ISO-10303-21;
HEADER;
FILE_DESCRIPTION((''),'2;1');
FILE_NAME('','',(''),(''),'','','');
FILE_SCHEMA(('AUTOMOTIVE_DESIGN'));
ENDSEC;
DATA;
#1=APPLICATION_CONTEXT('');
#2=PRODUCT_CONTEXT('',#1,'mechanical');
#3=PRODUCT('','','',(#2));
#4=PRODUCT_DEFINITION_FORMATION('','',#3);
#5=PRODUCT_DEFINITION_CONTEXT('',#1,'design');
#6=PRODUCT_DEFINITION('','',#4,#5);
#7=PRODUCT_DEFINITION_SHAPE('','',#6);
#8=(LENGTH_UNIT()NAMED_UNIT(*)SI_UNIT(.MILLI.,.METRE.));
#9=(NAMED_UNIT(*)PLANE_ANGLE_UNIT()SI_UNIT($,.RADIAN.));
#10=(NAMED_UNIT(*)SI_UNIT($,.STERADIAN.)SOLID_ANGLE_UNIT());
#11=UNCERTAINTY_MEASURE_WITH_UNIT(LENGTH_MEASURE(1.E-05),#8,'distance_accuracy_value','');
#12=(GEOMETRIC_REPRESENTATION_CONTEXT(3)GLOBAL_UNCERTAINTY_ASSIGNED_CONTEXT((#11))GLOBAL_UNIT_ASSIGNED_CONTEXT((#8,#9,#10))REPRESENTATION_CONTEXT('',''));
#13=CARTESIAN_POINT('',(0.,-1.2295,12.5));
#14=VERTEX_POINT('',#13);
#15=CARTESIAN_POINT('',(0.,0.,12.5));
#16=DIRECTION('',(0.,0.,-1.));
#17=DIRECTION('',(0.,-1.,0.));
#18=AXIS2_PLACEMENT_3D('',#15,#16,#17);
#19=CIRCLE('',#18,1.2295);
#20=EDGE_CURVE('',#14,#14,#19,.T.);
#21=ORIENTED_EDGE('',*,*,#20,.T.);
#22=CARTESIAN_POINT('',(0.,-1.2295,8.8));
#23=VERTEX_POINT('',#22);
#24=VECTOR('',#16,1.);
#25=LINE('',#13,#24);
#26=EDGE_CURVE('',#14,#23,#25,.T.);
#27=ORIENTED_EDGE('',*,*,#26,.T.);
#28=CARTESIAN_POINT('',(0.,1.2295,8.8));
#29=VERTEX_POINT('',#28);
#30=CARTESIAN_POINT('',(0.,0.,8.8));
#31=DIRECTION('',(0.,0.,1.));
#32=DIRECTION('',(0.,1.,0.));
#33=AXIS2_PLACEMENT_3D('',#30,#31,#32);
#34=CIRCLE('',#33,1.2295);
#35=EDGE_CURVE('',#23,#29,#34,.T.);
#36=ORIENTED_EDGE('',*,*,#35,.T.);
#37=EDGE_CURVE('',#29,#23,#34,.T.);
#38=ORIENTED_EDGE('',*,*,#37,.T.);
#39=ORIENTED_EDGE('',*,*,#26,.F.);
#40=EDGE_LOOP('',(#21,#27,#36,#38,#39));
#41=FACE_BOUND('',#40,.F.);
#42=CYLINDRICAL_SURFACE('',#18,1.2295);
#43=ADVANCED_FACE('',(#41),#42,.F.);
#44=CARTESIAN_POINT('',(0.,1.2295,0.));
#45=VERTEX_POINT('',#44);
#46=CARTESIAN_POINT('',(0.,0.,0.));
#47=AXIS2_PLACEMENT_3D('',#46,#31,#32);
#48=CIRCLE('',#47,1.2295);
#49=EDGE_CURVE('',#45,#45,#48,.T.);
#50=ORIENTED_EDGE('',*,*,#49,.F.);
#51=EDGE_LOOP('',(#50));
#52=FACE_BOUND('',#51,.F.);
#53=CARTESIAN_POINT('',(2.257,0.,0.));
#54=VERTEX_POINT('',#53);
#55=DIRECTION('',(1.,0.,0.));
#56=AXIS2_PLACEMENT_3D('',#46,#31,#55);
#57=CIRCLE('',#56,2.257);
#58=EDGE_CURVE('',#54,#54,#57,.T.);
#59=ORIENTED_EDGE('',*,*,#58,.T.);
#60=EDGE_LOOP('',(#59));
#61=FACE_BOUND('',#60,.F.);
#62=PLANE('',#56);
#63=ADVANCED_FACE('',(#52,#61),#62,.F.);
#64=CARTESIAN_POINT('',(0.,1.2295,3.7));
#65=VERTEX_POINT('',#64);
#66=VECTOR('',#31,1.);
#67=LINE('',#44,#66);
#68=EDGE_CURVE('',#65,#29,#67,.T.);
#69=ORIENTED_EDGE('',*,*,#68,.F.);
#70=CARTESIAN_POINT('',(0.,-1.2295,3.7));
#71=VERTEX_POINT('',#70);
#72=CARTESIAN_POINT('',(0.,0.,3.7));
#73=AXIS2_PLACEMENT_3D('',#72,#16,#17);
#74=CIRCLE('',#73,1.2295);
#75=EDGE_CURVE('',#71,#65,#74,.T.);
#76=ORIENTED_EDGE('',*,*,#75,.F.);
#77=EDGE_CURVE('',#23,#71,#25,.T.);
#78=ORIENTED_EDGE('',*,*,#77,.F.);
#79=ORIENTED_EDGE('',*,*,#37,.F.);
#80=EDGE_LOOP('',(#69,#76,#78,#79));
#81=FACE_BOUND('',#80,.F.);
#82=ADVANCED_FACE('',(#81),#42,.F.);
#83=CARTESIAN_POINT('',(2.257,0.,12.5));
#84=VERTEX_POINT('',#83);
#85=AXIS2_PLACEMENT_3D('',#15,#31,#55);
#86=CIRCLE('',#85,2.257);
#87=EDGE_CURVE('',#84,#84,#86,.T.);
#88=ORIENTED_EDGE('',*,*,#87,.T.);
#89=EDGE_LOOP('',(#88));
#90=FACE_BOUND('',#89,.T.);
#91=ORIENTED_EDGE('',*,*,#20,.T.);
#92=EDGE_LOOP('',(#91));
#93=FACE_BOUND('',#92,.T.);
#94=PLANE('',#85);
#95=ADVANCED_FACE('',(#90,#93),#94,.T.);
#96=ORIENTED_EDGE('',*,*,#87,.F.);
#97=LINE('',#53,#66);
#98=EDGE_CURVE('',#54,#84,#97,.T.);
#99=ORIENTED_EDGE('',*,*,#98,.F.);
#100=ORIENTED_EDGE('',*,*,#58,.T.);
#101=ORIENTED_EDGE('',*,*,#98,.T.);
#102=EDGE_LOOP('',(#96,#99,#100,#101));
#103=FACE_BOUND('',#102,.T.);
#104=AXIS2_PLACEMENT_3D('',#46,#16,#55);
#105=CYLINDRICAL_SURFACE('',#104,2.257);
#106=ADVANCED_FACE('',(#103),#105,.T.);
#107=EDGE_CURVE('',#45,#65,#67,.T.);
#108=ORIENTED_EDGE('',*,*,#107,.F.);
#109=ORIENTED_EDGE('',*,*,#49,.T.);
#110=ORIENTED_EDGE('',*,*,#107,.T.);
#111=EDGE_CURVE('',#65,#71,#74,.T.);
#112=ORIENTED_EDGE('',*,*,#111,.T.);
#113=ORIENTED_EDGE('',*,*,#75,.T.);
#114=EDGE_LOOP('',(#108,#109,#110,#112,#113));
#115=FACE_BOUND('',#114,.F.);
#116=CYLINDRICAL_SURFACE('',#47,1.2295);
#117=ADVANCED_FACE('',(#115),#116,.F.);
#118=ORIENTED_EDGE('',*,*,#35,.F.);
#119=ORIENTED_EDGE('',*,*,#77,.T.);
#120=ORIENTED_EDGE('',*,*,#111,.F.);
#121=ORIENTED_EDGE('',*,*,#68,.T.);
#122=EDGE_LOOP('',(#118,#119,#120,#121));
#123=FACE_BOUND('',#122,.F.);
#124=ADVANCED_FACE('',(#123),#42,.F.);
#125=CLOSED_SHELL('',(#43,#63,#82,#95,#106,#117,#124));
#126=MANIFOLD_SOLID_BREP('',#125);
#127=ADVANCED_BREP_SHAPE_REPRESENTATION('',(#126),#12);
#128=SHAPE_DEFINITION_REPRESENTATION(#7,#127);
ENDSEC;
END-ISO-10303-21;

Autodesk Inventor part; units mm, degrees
ref_plane "YZ Plane" through (0, 0, 0) normal (1, 0, 0) x (0, 1, 0)
ref_plane "XZ Plane" through (0, 0, 0) normal (0, 1, 0) x (-1, 0, 0)
ref_plane "XY Plane" through (0, 0, 0) normal (0, 0, 1) x (1, 0, 0)
sketch "スケッチ1" plane through (0, 0, 0) normal (0, 0, 1) x (1, 0, 0)
  circle A0 centre (0, 0) radius 2.257
  dimension "d0" = 4.514
extrude "押し出し1" add sketch "スケッチ1" along normal blind 12.5
sketch "スケッチ2" plane through (0, 0, 12.5) normal (0, 0, 1) x (1, 0, 0)
  circle A0 centre (0, 0) radius 2.257 projected
hole "穴1" at (0, 0, 12.5) direction (0, 0, -1) diameter 2.459 depth 8.8 tip angle 118 thread size "M3x0.5" class "6H" standard "ANSI Metric M Profile"
sketch "スケッチ3" plane through (0, 0, 0) normal (0, 0, -1) x (-1, 0, 0)
  circle A0 centre (0, 0) radius 2.257 projected
hole "穴2" at (0, 0, 0) direction (0, 0, 1) diameter 2.459 depth 8.8 tip angle 118 thread size "M3x0.5" class "6H" standard "ANSI Metric M Profile"
properties part number "Shaf"
